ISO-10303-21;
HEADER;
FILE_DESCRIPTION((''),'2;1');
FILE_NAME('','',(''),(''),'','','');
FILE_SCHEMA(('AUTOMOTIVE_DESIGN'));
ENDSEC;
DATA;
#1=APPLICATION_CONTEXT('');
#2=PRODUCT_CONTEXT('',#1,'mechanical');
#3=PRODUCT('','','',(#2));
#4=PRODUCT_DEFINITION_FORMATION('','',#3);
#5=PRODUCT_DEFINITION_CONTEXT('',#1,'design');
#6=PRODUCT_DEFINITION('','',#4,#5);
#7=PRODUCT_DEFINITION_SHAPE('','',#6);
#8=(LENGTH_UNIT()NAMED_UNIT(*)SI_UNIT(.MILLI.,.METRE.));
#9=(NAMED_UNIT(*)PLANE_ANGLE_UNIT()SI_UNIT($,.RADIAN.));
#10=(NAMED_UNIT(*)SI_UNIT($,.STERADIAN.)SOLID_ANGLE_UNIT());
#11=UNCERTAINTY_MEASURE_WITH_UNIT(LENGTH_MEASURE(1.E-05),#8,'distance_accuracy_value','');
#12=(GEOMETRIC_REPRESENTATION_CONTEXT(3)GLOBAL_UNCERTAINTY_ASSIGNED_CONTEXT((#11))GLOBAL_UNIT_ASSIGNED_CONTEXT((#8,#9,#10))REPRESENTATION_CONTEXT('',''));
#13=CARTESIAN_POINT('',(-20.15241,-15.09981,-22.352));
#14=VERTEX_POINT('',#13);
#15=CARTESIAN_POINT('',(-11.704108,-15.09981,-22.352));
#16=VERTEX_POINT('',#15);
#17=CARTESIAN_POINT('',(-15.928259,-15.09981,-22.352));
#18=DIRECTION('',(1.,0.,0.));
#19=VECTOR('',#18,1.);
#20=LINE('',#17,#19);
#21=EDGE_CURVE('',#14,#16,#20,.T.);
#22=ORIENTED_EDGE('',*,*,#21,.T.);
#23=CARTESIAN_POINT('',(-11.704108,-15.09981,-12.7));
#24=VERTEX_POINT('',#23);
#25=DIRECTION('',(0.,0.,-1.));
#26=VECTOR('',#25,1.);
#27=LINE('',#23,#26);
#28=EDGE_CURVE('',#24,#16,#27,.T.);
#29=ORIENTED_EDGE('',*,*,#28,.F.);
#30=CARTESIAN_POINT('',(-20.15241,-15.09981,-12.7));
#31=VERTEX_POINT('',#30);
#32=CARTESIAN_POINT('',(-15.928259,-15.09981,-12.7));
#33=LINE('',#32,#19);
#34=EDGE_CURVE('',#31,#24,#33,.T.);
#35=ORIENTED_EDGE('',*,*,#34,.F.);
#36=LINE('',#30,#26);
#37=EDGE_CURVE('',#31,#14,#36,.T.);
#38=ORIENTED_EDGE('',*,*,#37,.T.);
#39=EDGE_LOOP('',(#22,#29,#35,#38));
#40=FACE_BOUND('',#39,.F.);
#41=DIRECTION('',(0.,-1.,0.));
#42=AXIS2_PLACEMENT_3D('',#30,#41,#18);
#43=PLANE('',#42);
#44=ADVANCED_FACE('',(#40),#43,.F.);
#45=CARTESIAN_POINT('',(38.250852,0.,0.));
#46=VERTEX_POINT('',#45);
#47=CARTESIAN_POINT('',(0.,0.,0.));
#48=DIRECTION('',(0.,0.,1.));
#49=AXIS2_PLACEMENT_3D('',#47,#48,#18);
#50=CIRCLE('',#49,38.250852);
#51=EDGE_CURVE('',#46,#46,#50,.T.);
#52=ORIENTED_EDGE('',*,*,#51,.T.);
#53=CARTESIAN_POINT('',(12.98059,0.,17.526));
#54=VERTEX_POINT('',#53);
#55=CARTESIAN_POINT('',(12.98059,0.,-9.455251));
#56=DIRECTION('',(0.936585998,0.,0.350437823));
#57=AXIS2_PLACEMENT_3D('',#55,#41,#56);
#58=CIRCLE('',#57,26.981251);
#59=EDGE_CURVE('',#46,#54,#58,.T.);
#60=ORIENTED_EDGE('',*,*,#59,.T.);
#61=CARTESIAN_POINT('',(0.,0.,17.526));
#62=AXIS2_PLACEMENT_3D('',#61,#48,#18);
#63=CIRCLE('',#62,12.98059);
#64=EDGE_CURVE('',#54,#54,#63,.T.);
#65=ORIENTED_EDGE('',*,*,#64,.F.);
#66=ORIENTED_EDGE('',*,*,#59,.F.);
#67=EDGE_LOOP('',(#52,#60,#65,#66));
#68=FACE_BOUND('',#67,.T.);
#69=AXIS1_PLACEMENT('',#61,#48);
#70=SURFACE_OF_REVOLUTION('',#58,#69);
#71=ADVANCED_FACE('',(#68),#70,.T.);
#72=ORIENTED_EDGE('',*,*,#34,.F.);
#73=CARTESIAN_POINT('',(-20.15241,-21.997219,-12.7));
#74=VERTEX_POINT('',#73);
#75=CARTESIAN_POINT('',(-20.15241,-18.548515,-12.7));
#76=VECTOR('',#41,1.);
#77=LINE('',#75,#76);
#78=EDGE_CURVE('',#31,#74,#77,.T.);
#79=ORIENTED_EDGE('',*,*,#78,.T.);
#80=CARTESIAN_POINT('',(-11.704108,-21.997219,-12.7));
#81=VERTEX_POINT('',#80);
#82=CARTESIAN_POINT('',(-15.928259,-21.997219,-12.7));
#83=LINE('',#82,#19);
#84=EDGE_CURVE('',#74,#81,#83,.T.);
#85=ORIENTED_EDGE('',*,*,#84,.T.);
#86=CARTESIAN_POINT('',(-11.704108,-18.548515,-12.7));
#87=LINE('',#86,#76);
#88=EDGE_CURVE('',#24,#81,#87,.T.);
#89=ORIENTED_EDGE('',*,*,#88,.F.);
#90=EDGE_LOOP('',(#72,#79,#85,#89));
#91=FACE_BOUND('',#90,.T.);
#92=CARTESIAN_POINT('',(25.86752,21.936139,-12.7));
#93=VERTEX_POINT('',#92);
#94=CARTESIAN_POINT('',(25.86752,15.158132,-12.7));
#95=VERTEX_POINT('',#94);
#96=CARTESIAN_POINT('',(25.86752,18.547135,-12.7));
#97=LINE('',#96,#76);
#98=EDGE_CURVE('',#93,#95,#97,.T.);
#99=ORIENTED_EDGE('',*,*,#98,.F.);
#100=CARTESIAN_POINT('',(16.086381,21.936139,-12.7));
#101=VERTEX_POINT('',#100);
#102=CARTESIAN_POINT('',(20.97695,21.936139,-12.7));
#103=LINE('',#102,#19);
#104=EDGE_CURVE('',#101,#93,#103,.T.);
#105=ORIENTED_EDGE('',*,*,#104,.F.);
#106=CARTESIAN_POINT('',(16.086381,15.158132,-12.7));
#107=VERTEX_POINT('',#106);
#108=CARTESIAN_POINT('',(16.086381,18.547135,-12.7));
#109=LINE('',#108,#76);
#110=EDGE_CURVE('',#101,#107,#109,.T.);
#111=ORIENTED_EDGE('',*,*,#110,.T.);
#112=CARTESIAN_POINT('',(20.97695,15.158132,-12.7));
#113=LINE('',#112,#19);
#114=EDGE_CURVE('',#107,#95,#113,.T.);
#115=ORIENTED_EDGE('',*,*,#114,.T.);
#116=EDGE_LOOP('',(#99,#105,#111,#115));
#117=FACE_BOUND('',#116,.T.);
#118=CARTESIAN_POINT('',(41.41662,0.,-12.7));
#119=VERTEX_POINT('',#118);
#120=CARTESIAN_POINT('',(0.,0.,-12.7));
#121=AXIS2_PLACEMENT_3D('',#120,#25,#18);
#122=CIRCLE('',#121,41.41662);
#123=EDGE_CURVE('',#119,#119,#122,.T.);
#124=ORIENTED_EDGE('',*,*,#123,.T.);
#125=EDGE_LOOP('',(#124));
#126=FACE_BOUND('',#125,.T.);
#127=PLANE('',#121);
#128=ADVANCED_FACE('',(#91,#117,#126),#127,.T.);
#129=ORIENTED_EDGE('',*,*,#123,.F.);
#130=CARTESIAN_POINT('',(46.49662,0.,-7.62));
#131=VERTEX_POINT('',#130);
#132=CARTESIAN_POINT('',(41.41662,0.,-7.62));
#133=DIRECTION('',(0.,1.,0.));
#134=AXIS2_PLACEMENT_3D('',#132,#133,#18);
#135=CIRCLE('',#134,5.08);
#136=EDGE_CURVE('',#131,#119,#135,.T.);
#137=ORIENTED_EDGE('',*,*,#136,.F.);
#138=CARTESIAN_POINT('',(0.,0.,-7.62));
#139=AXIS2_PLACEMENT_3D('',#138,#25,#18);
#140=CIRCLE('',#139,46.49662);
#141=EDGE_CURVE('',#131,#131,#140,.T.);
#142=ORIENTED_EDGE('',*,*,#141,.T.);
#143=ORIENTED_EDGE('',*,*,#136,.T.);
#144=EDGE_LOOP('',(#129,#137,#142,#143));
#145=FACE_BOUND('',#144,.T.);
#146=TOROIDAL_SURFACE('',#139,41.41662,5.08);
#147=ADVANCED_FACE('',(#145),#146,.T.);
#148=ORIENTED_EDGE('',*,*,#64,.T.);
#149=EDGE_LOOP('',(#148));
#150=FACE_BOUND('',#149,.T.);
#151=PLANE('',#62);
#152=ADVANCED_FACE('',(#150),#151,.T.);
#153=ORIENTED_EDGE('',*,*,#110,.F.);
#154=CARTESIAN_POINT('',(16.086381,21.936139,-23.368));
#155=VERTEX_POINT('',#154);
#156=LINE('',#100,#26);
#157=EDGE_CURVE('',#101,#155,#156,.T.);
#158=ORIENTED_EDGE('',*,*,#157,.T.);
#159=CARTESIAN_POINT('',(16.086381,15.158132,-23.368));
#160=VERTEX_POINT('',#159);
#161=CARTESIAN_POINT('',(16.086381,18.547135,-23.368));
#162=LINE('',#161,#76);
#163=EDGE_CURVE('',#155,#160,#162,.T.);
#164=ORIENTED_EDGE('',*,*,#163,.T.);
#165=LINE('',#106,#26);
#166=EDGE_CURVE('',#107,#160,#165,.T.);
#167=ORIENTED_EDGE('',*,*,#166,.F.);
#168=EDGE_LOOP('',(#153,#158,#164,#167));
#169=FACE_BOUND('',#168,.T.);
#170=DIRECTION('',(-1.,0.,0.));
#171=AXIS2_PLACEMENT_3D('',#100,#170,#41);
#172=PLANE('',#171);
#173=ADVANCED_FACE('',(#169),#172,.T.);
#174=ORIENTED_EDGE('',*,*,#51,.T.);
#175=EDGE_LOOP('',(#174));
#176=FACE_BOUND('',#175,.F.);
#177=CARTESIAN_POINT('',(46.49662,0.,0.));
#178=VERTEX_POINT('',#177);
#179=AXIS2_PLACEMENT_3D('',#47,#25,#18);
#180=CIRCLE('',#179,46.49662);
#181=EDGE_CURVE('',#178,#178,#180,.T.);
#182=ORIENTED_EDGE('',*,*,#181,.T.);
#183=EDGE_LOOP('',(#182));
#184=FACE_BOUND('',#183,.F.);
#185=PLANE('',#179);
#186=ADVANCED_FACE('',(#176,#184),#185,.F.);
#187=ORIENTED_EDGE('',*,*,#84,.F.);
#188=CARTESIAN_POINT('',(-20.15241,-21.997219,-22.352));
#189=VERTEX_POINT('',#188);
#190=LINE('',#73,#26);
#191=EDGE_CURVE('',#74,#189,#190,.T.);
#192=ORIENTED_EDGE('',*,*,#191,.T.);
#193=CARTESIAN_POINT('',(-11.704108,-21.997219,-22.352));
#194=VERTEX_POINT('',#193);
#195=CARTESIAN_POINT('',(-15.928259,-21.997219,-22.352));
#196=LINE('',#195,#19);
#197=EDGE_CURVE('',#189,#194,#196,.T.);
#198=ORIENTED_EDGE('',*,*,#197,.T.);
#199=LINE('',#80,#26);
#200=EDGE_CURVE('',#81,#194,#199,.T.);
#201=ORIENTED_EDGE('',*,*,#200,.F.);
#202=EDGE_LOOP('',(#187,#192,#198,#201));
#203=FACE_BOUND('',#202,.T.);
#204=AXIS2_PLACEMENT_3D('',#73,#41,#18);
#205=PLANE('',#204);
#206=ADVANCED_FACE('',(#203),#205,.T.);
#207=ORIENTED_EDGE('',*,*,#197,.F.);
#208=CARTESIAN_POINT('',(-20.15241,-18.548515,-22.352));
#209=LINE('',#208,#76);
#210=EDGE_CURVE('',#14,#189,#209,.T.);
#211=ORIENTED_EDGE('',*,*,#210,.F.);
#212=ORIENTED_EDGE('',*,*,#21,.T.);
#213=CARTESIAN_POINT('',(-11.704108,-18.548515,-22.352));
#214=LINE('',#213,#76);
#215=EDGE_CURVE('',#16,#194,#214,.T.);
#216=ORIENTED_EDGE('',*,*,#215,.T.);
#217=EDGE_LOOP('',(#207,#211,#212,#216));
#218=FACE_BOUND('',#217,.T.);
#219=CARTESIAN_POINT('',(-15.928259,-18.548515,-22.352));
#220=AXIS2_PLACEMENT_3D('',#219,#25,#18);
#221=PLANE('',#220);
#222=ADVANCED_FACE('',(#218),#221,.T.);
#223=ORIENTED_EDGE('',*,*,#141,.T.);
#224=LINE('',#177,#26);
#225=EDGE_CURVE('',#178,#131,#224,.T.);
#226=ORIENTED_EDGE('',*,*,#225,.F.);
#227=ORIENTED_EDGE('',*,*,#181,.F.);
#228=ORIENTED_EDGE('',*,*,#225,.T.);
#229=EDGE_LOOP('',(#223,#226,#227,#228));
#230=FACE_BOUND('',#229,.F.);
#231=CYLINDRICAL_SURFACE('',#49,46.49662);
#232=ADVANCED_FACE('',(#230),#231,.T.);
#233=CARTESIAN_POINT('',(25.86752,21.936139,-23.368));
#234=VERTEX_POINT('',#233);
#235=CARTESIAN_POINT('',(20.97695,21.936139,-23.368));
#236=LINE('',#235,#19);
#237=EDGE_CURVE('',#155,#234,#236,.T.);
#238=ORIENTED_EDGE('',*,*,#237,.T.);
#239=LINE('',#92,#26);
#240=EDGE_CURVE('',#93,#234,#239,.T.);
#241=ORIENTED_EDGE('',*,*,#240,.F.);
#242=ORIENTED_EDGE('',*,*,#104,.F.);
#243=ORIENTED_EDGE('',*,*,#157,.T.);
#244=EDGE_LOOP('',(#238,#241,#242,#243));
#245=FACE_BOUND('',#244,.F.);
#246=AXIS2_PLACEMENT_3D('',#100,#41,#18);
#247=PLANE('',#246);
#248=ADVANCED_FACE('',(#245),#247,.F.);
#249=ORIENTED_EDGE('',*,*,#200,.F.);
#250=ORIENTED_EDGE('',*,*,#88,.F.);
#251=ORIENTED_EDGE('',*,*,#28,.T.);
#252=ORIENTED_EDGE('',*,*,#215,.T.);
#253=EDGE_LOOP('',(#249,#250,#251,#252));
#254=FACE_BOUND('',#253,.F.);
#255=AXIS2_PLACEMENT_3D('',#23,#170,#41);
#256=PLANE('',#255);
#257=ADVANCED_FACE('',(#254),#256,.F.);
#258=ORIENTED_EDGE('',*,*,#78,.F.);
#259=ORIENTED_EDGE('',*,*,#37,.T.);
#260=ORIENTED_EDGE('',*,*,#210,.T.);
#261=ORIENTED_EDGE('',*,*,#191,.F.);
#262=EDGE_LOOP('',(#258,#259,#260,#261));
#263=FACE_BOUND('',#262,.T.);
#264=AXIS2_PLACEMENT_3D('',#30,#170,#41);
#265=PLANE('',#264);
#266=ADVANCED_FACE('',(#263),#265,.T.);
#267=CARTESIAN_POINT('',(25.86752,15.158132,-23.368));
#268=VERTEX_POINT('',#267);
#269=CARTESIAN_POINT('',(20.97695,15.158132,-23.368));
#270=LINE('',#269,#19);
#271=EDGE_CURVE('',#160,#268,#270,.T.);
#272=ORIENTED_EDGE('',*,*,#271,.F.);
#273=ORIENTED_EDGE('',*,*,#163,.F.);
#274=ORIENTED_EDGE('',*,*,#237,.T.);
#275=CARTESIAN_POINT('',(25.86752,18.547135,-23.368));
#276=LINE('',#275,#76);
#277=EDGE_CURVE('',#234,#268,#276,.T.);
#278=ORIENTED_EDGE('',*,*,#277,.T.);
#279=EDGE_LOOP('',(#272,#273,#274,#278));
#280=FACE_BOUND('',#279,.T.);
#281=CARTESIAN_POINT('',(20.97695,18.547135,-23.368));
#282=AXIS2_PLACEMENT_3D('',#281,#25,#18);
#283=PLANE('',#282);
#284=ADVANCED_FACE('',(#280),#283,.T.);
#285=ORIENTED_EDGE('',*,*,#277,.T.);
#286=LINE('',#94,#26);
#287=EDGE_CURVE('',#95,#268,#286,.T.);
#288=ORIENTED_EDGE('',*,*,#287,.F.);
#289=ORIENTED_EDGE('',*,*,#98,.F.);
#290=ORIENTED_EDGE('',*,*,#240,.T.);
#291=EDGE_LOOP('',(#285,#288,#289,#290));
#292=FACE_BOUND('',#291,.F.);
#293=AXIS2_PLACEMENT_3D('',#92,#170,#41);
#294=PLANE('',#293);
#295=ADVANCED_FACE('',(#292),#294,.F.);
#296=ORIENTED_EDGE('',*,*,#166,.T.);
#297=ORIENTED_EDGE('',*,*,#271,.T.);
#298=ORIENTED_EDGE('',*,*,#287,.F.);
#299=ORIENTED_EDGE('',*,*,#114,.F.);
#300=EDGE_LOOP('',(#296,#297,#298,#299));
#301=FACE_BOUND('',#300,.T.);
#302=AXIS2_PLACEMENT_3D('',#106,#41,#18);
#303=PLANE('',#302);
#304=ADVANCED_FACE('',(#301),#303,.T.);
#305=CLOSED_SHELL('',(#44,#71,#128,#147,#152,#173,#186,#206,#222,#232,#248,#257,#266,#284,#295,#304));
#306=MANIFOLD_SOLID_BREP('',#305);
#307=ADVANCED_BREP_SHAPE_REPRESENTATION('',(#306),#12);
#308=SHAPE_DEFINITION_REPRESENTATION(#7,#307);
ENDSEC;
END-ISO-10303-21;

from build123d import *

# Parameters (mm, degrees)
F0_R     = 38.2508515855
F1_DEPTH = 17.526
F3_R     = 46.4966196034
F4_DEPTH = 12.7
F5_R     = 5.08
F6_W     = 8.4483027458
F6_H     = 6.8974085152
F8_DEPTH = 9.652
F7_W     = 9.7811389714
F7_H     = 6.7780073732
F9_DEPTH = 10.668


# Not quite as in the source:
# - a fillet or chamfer that OpenCascade refuses, or shapes differently, is made with other operations: its cross-section is extruded or revolved along the edge and cut away or added


with BuildPart() as f1:
    # F0 (on Top) → F1 (new body)
    with BuildSketch(Plane.XY):
        Circle(F0_R)
    extrude(amount=F1_DEPTH)

    # F2: fillet of radius 26.9812507731 on 1 edges, made by hand

    # F2_s1 → F2_t2 (revolve, cut)
    with BuildSketch(Plane.XZ):
        with BuildLine():
            ThreePointArc((38.2508515855, 0), (28.3570882092, 12.7157030349), (12.9805898912, 17.526))
            Line((12.9805898912, 17.526), (38.2508515855, 17.526))
            Line((38.2508515855, 17.526), (38.2508515855, 0))
        make_face()
    revolve(axis=Axis((0, 0, 17.526), (0, 0, 1)), mode=Mode.SUBTRACT)

    # F3 (on face) → F4 (join)
    with BuildSketch(Plane(origin=(0, 0, 0), x_dir=(1, 0, 0), z_dir=(0, 0, -1))):
        Circle(F3_R)
    extrude(amount=F4_DEPTH)

    # F5
    f5_edges = [f1.edges().sort_by_distance(p)[0] for p in [
        (-46.49662, 0, -12.7),
    ]]
    fillet(f5_edges, radius=F5_R)

    # F6 (on face) → F8 (join)
    with BuildSketch(Plane(origin=(0, 0, -12.7), x_dir=(1, 0, 0), z_dir=(0, 0, -1))):
        with Locations((-15.9282591194, 18.548514694)):
            Rectangle(F6_W, F6_H)
    extrude(amount=F8_DEPTH)

    # F7 (on face) → F9 (join)
    with BuildSketch(Plane(origin=(0, 0, -12.7), x_dir=(1, 0, 0), z_dir=(0, 0, -1))):
        with Locations((20.9769504145, -18.5471354052)):
            Rectangle(F7_W, F7_H)
    extrude(amount=F9_DEPTH)


solid = f1.part
